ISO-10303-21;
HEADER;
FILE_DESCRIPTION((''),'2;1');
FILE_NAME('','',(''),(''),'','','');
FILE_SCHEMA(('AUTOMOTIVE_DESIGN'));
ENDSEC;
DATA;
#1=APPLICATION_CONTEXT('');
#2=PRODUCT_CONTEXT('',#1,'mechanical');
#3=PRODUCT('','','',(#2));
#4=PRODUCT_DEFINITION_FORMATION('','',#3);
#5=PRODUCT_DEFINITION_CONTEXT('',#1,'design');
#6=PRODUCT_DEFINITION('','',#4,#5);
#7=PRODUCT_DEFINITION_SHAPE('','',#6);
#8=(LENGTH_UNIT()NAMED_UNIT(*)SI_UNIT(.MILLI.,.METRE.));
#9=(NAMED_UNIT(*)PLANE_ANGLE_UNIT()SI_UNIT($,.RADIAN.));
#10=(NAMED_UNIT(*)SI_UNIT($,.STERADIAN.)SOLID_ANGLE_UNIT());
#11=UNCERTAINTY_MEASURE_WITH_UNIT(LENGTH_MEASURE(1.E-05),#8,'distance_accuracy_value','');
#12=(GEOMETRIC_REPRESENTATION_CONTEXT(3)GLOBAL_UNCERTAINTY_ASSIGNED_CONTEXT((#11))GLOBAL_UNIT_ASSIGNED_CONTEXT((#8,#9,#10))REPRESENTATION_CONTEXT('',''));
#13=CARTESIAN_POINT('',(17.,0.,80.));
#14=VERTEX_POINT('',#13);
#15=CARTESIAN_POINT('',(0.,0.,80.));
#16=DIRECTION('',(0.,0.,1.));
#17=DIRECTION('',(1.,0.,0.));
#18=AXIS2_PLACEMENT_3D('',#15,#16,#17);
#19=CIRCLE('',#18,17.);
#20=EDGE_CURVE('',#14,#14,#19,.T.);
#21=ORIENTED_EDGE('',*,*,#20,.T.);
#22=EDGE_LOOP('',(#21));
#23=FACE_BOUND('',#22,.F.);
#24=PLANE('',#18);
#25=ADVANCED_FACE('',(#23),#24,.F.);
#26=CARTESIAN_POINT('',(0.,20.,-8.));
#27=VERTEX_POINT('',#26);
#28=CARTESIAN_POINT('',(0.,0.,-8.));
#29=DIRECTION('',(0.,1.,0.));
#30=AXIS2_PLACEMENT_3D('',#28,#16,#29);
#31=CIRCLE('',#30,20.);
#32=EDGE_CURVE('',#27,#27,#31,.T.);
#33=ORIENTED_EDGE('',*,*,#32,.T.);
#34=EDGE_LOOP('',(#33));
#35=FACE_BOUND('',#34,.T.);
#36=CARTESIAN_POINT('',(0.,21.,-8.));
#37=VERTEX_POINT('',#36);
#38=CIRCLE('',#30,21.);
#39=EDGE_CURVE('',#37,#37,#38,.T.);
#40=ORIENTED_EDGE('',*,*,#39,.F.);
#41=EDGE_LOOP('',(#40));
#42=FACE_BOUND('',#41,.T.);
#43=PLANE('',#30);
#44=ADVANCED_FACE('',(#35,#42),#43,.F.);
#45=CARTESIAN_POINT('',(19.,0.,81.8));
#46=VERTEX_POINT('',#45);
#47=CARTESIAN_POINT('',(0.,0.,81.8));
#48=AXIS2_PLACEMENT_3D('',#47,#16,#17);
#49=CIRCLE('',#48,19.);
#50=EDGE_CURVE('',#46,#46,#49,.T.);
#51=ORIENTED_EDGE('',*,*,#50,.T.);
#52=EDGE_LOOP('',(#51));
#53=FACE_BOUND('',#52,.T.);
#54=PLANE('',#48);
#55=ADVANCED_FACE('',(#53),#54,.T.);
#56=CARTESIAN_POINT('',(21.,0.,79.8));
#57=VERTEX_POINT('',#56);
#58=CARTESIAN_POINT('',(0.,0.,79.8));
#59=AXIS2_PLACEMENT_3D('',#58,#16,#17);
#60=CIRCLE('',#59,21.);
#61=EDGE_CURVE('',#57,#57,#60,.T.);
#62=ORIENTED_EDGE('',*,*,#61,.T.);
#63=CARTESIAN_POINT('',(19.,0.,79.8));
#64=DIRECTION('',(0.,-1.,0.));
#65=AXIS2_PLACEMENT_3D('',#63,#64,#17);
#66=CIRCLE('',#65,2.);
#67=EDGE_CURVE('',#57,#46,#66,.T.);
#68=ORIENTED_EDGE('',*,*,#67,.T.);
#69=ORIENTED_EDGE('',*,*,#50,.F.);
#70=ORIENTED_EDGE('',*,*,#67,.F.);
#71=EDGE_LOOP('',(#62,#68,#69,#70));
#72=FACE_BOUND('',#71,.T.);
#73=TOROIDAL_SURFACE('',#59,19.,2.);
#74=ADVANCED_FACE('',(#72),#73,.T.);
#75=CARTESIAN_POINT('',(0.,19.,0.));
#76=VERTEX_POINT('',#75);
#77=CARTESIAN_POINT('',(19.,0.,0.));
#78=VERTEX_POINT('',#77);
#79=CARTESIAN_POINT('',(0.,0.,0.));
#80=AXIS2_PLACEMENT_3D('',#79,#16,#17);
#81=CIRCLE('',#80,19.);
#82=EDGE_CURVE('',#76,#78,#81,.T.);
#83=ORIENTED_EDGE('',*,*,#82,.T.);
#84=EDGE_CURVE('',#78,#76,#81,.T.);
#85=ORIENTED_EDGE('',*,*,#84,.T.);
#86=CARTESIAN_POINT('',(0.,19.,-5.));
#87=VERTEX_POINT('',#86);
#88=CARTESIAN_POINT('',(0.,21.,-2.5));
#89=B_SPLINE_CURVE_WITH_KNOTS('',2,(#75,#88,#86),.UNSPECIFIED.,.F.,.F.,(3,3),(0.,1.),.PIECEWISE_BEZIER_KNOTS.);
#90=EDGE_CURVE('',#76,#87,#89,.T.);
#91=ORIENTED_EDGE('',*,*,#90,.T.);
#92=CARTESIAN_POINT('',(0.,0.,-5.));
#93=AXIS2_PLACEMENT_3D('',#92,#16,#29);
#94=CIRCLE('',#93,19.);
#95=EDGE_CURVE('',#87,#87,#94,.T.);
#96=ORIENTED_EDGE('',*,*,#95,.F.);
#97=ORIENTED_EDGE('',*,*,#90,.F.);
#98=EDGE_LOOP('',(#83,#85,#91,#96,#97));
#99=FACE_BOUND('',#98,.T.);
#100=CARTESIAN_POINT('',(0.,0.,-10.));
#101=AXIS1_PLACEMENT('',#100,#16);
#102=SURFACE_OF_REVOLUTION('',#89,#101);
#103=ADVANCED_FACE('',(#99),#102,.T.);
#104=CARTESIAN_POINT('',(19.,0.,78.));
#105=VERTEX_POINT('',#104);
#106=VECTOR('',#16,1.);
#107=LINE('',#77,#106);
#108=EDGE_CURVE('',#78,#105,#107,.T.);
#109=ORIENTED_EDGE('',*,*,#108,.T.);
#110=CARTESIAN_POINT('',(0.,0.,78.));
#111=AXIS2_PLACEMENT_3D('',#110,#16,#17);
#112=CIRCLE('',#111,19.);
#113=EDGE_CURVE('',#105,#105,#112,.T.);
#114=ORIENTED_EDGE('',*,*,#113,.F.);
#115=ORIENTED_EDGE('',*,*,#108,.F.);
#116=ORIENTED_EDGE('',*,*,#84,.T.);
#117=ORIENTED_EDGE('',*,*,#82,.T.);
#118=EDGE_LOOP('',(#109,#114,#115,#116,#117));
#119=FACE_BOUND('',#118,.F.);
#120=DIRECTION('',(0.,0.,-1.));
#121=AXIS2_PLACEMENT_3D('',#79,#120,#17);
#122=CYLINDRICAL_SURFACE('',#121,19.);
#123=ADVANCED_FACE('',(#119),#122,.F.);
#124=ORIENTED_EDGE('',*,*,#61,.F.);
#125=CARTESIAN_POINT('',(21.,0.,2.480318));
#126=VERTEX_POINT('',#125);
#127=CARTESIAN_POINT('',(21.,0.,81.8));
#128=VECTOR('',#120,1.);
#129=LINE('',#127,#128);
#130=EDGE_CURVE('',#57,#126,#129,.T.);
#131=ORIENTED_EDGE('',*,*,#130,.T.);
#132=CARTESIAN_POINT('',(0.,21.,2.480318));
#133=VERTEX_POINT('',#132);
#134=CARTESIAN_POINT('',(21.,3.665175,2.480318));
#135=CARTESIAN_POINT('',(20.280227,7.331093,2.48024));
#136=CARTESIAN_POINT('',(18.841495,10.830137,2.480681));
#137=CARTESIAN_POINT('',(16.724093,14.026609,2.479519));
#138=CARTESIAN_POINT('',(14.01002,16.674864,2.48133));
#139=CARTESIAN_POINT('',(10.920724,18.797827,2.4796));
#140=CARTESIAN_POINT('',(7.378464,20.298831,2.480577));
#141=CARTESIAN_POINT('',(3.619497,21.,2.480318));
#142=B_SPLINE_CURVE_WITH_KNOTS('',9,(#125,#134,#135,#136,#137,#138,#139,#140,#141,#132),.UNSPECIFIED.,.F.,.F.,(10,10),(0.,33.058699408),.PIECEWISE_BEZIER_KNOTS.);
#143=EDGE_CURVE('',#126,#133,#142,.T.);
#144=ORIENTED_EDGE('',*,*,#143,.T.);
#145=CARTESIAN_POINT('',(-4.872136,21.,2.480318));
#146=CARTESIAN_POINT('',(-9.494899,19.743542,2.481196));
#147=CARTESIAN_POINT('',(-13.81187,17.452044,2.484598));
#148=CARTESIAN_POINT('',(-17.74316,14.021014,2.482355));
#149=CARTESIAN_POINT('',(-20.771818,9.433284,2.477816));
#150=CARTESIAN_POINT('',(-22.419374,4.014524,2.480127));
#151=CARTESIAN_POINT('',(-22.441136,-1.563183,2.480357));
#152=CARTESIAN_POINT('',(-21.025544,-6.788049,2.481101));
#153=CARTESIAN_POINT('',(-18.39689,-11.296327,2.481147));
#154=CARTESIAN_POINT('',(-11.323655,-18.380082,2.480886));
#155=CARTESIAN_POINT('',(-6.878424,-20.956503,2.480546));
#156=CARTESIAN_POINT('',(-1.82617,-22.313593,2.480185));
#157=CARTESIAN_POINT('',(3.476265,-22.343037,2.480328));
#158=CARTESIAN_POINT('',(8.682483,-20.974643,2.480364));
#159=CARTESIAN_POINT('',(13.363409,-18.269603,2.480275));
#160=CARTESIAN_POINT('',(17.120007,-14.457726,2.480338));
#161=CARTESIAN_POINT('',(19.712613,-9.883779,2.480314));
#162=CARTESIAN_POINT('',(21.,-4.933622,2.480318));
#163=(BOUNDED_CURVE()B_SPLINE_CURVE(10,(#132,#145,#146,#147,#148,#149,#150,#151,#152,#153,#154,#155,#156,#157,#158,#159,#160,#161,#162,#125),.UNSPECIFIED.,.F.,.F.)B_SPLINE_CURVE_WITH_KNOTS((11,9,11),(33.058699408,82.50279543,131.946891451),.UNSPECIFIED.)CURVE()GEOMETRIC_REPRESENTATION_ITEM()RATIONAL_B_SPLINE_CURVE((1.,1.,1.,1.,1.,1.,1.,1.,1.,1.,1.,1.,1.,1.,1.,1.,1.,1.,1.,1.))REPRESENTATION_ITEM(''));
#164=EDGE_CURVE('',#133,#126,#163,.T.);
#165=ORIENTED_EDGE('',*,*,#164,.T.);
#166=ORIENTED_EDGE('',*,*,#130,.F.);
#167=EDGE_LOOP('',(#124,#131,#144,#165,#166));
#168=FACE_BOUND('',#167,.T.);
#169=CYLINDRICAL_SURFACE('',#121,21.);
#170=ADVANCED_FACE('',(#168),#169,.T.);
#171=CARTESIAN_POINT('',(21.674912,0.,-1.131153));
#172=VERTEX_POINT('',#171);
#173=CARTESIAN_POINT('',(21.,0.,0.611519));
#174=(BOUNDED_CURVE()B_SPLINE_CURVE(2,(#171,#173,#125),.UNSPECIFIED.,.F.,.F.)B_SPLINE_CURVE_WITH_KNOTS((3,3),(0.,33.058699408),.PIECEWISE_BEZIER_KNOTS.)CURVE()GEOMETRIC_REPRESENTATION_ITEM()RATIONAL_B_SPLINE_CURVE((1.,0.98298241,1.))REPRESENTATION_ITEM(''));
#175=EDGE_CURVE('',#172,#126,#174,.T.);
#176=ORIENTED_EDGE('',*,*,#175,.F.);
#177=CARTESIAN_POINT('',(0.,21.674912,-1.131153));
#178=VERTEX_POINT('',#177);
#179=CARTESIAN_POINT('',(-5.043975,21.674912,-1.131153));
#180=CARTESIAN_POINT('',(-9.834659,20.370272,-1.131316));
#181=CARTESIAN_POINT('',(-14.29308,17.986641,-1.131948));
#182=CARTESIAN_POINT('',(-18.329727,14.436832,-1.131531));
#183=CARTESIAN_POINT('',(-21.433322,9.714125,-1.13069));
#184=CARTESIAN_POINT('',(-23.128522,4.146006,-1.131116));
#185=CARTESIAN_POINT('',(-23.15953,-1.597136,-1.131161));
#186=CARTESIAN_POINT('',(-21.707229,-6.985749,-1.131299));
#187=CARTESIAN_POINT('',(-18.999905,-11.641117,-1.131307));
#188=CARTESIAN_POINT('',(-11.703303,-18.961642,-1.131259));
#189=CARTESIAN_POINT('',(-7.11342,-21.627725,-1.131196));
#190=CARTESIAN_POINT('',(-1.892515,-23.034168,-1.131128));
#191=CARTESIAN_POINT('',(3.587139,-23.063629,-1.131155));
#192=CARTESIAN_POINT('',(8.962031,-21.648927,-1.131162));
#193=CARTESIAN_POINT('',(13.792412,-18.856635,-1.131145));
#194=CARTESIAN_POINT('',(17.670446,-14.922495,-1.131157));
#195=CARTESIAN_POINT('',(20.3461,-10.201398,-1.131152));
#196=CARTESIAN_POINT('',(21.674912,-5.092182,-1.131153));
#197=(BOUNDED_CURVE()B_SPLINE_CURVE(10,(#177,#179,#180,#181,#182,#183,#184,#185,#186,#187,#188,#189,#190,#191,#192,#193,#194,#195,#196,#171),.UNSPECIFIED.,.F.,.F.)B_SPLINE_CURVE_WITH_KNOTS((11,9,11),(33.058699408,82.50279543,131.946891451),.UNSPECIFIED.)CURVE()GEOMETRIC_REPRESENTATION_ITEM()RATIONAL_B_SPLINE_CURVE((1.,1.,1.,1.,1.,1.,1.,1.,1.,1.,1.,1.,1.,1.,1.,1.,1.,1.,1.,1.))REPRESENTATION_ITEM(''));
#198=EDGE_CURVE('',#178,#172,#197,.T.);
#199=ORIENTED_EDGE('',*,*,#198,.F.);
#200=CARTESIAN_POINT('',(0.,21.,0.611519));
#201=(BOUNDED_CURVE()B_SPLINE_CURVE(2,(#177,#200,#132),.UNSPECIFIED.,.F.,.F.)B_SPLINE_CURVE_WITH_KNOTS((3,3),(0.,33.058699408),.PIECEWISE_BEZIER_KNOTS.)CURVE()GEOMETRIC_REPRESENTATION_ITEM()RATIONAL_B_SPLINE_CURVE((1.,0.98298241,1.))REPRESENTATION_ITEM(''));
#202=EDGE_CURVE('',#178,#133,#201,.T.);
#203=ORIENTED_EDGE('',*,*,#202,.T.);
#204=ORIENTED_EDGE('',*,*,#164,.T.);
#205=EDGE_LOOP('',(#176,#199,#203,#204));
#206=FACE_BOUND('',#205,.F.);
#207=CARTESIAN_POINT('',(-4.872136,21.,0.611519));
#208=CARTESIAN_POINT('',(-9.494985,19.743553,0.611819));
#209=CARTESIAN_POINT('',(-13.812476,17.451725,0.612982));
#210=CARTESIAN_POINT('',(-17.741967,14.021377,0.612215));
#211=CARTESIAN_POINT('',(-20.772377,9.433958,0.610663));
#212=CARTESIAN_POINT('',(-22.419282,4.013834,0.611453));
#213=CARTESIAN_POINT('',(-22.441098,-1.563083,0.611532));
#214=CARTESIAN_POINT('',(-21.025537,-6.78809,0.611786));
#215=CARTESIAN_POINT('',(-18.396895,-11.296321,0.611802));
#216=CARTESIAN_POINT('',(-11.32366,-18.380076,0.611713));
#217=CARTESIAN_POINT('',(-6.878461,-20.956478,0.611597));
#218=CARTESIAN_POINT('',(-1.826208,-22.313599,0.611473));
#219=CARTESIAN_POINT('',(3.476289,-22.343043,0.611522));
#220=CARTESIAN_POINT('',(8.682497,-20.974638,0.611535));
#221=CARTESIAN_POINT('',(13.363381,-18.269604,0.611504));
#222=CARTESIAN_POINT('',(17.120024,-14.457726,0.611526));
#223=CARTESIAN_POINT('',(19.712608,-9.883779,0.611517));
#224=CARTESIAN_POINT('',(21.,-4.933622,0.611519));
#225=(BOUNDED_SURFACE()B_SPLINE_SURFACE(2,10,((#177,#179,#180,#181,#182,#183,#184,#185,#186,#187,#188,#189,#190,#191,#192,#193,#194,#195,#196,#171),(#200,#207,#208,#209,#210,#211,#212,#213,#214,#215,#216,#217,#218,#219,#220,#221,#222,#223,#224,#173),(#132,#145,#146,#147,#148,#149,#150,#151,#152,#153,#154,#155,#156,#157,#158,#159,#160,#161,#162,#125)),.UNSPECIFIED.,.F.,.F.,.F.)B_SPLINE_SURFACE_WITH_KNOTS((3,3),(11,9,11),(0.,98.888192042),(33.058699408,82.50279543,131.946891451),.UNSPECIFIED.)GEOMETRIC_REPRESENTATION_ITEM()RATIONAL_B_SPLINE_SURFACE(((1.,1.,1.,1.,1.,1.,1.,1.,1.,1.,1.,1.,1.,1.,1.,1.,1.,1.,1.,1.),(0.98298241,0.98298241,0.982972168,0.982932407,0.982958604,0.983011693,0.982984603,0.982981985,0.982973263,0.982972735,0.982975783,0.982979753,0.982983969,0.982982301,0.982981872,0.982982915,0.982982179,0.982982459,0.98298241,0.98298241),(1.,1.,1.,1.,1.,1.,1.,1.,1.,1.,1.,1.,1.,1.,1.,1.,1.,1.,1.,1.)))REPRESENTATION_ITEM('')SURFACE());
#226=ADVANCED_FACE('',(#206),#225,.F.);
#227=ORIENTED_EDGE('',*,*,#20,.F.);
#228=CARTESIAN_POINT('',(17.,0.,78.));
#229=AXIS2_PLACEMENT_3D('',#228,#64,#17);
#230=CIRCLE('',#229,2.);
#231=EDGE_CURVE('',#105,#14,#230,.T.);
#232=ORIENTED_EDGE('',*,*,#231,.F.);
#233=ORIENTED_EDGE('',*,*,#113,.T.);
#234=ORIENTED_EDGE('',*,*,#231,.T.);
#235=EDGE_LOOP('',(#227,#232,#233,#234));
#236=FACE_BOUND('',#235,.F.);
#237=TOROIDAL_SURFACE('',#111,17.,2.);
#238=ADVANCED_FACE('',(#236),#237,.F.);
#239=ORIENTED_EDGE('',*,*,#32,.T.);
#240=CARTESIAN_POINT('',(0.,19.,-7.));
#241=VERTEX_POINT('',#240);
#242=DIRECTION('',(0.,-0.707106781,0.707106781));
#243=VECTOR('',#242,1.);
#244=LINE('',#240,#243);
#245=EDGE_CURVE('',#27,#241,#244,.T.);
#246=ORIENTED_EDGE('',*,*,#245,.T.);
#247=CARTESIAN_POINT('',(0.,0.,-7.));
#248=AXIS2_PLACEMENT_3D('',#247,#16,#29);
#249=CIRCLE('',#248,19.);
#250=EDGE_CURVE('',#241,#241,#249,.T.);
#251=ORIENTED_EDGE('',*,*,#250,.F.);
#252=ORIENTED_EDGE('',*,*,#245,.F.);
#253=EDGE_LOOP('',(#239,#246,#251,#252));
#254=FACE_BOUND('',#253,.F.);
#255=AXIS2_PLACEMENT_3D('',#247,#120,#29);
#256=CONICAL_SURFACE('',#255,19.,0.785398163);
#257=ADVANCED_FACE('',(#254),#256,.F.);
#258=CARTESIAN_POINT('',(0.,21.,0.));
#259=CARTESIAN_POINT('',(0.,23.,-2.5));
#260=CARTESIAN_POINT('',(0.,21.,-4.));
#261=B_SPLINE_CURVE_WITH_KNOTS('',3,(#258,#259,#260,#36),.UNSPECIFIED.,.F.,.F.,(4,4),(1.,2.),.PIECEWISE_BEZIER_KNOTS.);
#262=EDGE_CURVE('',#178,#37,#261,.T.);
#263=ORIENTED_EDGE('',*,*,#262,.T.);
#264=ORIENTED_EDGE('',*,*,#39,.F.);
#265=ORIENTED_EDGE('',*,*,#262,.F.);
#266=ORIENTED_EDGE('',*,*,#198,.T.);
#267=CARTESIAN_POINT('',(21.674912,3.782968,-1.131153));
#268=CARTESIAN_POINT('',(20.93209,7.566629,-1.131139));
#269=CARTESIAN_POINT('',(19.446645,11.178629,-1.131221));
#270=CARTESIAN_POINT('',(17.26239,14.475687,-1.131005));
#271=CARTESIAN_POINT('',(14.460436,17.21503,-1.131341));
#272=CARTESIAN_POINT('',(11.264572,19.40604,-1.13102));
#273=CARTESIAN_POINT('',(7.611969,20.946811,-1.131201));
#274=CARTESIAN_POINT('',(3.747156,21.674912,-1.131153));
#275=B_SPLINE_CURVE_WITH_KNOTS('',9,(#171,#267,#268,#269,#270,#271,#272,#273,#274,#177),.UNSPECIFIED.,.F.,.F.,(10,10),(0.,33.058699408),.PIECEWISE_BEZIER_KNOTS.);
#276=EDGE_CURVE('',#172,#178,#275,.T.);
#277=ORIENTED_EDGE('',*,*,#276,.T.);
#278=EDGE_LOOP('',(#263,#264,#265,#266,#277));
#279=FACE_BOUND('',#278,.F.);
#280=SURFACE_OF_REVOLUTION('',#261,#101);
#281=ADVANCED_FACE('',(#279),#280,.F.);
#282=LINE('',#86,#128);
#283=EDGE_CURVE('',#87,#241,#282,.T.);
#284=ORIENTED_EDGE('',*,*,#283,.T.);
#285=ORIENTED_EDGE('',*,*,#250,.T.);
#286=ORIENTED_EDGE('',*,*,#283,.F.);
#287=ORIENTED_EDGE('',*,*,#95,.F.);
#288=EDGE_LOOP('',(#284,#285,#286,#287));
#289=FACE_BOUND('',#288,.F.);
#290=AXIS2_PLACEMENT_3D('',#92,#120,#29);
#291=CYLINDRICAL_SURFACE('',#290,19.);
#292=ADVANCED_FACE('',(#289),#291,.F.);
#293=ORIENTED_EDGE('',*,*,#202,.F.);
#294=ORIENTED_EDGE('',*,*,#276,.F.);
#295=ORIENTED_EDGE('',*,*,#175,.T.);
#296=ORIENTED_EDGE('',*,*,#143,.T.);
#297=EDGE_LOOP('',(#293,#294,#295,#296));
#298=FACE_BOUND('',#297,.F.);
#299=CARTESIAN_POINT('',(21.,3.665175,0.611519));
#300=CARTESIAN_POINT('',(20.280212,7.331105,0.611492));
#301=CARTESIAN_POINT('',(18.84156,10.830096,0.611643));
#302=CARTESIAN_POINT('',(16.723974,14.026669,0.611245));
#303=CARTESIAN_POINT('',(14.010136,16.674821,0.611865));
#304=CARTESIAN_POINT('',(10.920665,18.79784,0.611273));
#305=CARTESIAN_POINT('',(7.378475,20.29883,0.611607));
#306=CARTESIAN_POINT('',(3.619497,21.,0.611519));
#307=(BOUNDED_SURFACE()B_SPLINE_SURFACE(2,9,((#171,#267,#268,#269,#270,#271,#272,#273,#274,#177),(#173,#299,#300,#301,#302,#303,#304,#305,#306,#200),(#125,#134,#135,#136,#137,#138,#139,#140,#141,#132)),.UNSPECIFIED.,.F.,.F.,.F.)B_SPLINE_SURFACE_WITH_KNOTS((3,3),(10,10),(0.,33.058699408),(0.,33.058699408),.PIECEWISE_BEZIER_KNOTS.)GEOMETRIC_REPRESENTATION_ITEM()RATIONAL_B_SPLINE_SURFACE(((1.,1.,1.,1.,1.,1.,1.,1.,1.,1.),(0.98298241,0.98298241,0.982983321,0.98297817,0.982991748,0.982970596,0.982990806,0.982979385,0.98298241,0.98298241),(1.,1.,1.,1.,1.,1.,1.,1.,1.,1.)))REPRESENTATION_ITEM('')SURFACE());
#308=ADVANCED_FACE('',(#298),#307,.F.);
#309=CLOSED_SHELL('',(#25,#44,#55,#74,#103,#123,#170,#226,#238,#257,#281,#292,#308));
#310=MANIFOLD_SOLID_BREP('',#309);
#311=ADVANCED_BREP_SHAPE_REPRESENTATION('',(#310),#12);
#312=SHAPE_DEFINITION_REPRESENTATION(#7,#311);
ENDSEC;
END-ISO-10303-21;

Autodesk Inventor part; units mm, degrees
ref_plane "YZ Plane" through (0, 0, 0) normal (1, 0, 0) x (0, 1, 0)
ref_plane "XZ Plane" through (0, 0, 0) normal (0, 1, 0) x (-1, 0, 0)
ref_plane "XY Plane" through (0, 0, 0) normal (0, 0, 1) x (1, 0, 0)
sketch "Skizze1" plane through (0, 0, 0) normal (0, 0, 1) x (1, 0, 0)
  circle A0 centre (0, 0) radius 19
  circle A1 centre (0, 0) radius 21
  dimension "d0" = 38
  dimension "d1" = 2
extrude "Extrusion1" add sketch "Skizze1" along normal blind 80
sketch "Skizze2" plane through (0, 0, 80) normal (0, 0, 1) x (1, 0, 0)
  circle A0 centre (0, 0) radius 21 projected
extrude "Extrusion2" add sketch "Skizze2" along normal blind 1.8
fillet "Rundung1" radius 2 2 edges at (-21, 0, 81.8) (-19, 0, 80)
sketch "Skizze3" plane through (0, 0, 0) normal (1, 0, 0) x (0, 1, 0)
  line L0 (-21, 0) -> (21, 0) projected
  line L1 (21, 0) -> (23, -2.5) construction
  line L2 (23, -2.5) -> (21, -4) construction
  line L3 (21, -4) -> (21, -8) construction
  spline S0 degree 3 poles (21, 0) (23, -2.5) (21, -4) (21, -8) knots 1 1 1 1 2 2 2 2
  spline S1 degree 2 poles (19, 0) (21, -2.5) (19, -5) knots 0 0 0 1 1 1
  line L4 (19, -5) -> (19, -8)
  line L5 (19, -8) -> (21, -8)
  line L6 (21, 0) -> (19, 0)
  line L7 (21, 0) -> (21, 79.8) projected
  line L8 (21, 0) -> (21, 79.8) projected
  line L9 (0, -25.6969) -> (0, 97.3828) projected
  point P0 (0, 0)
  point P1 (20, -2.5)
  dimension "d7" = 2
  dimension "d8" = 2
  dimension "d9" = 8
  dimension "d10" = 1
  dimension "d11" = 2.5
  dimension "d12" = 5
  dimension "d13" = 4
revolve "Umdrehung1" add sketch "Skizze3" angle 360 about axis through (0, 0, -10) along (0, 0, 1)
fillet "Rundung2" radius 10 1 edges at (14.8492, 14.8492, 0)
chamfer "Fase1" distance 1 angle 45 1 edges at (0, -19, -8)
equation "\"d11\" = 0.5 * d12"
equation "\"G_L\" = 0"
equation "\"G_H\" = 0"
equation "\"G_B\" = 0"
properties part number "Löffelbox_oben" material "GEDA Stahl"
